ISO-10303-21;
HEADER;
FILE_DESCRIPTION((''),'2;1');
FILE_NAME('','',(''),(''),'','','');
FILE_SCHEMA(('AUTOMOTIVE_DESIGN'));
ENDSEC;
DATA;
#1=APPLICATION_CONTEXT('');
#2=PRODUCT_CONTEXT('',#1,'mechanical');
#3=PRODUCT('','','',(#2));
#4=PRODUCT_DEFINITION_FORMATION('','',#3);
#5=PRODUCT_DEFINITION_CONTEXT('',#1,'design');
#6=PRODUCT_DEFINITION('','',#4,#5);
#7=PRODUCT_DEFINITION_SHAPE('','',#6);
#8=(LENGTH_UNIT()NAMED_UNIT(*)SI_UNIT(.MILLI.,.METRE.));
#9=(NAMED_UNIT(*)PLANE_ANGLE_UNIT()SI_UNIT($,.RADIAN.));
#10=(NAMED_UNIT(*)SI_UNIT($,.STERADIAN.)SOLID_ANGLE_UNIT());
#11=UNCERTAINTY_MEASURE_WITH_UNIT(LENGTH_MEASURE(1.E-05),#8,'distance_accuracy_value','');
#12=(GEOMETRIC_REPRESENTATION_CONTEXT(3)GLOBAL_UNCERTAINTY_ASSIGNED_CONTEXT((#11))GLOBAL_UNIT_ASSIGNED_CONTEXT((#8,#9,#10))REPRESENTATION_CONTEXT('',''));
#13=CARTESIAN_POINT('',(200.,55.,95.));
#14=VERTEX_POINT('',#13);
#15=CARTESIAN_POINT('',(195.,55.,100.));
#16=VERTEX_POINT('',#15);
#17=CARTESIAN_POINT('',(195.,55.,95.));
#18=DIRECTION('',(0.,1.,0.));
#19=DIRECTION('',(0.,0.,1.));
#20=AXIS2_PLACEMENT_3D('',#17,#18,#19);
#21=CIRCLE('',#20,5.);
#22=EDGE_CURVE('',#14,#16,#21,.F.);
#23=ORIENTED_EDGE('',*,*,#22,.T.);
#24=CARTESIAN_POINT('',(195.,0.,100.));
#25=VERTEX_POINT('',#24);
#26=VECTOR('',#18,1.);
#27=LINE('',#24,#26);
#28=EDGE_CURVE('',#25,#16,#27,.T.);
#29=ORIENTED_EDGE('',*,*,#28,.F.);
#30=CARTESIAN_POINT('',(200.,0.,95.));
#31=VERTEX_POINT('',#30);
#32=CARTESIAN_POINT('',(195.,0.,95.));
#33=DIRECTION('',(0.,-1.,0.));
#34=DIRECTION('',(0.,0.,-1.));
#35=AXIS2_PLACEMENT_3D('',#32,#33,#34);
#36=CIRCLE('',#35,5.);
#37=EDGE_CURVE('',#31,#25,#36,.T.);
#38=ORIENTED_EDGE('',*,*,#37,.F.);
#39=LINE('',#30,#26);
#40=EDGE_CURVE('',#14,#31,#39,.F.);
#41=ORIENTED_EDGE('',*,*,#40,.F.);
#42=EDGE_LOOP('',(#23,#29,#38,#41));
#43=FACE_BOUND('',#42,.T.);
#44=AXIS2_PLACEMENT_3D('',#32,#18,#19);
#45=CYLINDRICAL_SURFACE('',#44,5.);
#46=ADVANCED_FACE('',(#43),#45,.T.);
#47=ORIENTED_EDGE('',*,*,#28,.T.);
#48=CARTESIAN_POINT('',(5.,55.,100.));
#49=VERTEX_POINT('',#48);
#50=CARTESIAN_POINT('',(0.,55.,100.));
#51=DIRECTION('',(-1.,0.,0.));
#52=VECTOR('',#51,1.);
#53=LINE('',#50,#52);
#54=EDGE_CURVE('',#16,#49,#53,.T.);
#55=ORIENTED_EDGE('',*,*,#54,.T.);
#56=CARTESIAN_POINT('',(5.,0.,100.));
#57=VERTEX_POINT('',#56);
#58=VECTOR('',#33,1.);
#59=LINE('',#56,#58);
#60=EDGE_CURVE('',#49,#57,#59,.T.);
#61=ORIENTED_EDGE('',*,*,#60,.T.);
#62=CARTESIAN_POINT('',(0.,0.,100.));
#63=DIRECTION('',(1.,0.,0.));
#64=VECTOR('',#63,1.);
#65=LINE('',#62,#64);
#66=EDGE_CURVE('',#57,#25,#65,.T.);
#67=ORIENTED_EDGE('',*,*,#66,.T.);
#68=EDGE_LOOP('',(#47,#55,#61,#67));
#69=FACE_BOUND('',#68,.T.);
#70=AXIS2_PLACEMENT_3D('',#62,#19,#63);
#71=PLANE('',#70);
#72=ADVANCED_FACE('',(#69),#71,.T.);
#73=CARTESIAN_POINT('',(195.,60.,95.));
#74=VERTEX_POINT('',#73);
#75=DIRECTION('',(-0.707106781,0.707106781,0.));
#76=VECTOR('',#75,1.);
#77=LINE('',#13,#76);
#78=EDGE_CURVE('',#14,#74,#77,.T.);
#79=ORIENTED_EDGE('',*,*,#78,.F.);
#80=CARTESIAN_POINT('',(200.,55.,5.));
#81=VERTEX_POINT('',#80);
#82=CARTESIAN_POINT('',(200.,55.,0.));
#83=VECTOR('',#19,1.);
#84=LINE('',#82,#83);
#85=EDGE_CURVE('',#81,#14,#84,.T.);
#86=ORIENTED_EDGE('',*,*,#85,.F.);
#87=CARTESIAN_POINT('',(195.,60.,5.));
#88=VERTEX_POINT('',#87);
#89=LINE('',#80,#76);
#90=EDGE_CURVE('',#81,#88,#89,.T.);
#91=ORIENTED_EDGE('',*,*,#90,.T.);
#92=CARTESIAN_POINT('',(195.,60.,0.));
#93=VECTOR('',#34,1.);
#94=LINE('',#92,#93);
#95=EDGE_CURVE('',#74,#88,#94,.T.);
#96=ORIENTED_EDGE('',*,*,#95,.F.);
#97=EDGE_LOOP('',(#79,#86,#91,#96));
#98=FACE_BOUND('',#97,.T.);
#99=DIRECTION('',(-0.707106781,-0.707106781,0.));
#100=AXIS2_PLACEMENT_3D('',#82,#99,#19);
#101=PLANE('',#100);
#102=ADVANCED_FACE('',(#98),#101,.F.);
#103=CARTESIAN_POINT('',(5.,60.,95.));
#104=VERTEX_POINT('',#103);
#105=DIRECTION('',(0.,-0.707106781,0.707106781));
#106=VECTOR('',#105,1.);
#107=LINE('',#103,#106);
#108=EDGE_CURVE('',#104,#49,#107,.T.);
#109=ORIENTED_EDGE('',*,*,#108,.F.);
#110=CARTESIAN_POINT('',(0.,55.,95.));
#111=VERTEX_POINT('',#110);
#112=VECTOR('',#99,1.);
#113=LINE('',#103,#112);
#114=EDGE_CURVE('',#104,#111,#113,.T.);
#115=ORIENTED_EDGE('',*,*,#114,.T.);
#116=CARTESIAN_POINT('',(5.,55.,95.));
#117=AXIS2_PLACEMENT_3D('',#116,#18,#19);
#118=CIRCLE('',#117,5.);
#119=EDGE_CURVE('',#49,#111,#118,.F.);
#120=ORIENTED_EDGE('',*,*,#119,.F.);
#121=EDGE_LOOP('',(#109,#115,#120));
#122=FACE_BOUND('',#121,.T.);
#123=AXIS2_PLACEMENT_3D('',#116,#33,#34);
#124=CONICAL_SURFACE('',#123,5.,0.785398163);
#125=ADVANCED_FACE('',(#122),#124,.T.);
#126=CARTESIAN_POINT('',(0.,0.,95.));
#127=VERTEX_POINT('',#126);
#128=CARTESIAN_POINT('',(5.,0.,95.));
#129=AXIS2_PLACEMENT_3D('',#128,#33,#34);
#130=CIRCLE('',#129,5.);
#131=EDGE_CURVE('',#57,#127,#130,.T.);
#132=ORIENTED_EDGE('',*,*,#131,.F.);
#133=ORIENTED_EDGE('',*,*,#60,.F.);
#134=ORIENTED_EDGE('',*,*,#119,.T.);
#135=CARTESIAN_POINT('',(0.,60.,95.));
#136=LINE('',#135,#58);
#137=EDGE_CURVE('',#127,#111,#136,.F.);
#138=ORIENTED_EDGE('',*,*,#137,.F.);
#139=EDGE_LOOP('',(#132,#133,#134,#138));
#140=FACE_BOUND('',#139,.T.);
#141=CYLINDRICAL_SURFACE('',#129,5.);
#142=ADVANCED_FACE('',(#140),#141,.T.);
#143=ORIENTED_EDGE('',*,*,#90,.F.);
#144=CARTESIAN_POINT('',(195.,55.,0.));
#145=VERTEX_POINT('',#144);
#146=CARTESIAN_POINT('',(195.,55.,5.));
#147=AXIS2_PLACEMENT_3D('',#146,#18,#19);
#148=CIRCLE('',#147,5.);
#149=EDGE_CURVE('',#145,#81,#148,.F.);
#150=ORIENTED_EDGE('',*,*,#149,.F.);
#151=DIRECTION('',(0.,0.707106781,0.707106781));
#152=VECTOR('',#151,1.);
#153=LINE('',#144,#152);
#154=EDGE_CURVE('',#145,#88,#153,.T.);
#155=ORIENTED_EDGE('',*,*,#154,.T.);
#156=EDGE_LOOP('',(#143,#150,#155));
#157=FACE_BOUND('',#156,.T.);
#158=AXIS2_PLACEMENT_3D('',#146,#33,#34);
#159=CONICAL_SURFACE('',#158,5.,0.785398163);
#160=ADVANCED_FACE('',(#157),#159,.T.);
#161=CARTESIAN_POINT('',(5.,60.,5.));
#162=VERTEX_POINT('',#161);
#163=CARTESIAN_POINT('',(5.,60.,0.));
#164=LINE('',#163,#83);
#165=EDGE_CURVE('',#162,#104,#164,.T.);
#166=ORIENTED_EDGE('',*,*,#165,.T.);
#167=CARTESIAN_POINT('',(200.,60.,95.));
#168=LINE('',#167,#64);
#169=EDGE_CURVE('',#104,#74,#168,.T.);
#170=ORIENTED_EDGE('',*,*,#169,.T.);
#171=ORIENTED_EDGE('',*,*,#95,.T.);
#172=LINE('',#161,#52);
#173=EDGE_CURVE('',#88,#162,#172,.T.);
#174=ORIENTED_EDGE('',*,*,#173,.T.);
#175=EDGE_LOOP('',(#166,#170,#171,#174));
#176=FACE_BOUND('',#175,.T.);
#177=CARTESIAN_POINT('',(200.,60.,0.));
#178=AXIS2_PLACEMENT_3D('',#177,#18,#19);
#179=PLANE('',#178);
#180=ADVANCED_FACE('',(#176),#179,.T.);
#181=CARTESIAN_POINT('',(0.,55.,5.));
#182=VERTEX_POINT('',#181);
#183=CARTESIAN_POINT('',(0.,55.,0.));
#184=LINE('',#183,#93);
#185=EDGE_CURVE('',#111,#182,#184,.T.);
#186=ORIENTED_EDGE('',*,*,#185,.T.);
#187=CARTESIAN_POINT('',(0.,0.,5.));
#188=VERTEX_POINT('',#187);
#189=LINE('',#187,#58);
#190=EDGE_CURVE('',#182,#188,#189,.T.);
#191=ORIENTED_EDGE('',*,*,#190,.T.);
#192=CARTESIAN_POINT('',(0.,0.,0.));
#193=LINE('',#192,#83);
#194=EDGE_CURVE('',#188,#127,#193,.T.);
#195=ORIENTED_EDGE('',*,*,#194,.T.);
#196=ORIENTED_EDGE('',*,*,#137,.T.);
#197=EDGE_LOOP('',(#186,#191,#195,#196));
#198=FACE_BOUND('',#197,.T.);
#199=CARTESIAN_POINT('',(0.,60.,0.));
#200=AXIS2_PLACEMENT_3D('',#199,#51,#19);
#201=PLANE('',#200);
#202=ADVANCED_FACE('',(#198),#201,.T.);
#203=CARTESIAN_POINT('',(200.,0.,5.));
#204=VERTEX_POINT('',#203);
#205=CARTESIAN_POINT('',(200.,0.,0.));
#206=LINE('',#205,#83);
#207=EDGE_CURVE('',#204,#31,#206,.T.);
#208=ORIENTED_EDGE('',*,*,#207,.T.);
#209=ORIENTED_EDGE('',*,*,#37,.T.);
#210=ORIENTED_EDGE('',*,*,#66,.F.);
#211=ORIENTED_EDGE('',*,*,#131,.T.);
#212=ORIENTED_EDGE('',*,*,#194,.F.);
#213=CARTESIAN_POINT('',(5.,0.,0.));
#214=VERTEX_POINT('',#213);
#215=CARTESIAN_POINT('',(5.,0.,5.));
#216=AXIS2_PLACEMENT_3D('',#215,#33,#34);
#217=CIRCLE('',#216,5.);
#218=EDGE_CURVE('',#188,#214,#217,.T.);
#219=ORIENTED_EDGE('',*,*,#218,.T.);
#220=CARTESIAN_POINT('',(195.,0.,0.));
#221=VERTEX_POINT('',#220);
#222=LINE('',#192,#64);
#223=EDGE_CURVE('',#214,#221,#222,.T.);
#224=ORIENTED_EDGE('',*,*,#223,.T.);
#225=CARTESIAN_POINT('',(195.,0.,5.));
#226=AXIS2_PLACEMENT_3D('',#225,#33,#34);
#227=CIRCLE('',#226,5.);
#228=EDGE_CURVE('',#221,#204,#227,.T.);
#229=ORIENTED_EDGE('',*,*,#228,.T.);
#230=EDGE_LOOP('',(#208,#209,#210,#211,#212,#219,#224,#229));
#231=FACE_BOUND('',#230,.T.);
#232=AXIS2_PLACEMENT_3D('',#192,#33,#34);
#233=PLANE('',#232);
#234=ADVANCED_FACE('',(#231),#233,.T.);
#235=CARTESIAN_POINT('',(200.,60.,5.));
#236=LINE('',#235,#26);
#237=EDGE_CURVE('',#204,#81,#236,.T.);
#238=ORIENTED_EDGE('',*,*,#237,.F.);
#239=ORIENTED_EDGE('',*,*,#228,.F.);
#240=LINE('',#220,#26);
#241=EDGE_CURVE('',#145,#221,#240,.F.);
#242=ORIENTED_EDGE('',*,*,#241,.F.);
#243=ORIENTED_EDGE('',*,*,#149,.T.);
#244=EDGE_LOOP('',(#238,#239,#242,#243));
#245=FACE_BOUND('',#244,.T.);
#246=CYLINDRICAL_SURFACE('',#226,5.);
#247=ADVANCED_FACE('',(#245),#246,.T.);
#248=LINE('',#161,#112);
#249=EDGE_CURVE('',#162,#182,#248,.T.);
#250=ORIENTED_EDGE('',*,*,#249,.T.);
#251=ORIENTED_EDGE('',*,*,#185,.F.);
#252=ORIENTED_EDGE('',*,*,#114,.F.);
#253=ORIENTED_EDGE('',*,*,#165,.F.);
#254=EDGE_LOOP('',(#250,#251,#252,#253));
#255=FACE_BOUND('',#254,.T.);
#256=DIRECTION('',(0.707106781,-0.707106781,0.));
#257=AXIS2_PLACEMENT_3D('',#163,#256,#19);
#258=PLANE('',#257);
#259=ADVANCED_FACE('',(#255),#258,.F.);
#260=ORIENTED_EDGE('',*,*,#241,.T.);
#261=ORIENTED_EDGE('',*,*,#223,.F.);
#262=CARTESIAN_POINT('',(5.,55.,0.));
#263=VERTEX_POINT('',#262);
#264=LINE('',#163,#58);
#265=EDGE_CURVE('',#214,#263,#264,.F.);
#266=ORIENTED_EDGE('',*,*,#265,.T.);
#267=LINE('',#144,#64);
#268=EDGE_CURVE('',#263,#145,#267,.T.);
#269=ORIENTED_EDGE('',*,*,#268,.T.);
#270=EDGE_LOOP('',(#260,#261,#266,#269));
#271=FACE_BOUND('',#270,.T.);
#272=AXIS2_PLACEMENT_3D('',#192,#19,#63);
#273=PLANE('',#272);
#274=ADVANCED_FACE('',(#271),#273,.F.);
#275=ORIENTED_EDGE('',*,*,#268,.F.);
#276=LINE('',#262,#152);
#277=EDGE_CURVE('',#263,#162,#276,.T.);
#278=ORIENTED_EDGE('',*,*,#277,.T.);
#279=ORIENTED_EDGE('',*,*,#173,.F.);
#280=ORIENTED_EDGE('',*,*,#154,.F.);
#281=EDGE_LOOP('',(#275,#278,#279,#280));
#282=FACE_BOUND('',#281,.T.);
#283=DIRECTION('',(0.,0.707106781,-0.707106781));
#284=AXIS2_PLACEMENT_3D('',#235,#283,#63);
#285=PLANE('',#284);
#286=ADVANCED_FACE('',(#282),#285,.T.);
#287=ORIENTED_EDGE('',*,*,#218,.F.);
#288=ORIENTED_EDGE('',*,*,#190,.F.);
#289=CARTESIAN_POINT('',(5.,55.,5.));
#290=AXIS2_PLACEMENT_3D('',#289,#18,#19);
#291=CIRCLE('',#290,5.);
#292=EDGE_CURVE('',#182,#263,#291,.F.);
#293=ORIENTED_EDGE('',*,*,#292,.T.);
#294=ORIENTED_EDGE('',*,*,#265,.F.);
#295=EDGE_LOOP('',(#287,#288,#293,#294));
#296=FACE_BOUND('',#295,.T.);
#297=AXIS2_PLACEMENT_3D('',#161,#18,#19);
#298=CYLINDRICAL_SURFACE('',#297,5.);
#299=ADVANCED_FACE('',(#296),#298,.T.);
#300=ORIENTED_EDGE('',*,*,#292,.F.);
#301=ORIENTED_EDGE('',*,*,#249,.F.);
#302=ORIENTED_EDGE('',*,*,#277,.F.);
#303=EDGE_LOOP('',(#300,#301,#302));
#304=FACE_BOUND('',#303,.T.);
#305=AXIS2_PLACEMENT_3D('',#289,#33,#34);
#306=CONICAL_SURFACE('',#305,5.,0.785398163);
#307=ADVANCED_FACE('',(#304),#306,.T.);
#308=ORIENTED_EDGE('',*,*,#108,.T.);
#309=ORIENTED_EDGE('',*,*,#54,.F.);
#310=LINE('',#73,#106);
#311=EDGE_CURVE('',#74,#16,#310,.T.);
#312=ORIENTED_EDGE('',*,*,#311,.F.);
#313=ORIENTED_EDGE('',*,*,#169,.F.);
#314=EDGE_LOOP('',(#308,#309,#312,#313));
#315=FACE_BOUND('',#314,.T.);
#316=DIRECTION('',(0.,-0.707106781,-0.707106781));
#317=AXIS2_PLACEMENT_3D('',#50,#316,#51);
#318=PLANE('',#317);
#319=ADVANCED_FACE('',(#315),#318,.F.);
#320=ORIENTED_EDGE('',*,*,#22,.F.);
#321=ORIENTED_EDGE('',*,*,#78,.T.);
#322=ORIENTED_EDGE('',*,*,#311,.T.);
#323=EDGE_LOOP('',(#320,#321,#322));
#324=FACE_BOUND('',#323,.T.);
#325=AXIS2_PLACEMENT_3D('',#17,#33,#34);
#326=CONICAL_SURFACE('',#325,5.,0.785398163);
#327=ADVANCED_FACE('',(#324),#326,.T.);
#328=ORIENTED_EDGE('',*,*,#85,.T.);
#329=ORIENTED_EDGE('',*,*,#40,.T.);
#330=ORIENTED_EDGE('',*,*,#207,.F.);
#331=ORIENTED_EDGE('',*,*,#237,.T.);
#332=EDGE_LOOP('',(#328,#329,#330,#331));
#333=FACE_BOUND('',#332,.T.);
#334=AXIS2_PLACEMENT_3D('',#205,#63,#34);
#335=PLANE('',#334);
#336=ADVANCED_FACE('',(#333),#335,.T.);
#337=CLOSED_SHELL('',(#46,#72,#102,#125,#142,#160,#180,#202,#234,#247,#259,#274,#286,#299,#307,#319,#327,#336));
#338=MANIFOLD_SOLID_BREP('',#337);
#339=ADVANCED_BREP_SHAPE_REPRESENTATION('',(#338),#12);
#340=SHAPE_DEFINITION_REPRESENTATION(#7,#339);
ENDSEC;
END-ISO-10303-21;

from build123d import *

# Parameters (mm, degrees)
DODANIE_WYCI_GNI_CIE1_DEPTH = 100
ZAOKR_GLENIE4_R             = 5
ZAOKR_GLENIE5_SIZE          = 5


with BuildPart() as part:
    # Szkic 3D1 → Dodanie-wyciągnięcie1 (new body)
    with BuildSketch(Plane(origin=(0, 0, 0), x_dir=(0.9578262852211514, 0.2873478855663454, 0), z_dir=(0, 0, -1))):
        Polygon((0, 0), (191.565257044, 57.469577113), (208.806130178, 0), (17.240873134, -57.469577113), align=None)
    extrude(amount=-DODANIE_WYCI_GNI_CIE1_DEPTH)

    # Zaokrąglenie4
    zaokr_glenie4_edges = [part.edges().sort_by_distance(p)[0] for p in [
        (200, 30, 0),
        (200, 30, 100),
        (0, 30, 0),
        (0, 30, 100),
    ]]
    fillet(zaokr_glenie4_edges, radius=ZAOKR_GLENIE4_R)

    # Zaokrąglenie5
    zaokr_glenie5_edges = [part.edges().sort_by_distance(p)[0] for p in [
        (200, 60, 50),
        (100, 60, 100),
        (100, 60, 0),
        (0, 60, 50),
        (1.464466094, 60, 98.535533906),
        (1.464466094, 60, 1.464466094),
        (198.535533906, 60, 98.535533906),
        (198.535533906, 60, 1.464466094),
    ]]
    chamfer(zaokr_glenie5_edges, length=ZAOKR_GLENIE5_SIZE - 0.0001)  # a hair under: the kernel refuses the full size


solid = part.part
